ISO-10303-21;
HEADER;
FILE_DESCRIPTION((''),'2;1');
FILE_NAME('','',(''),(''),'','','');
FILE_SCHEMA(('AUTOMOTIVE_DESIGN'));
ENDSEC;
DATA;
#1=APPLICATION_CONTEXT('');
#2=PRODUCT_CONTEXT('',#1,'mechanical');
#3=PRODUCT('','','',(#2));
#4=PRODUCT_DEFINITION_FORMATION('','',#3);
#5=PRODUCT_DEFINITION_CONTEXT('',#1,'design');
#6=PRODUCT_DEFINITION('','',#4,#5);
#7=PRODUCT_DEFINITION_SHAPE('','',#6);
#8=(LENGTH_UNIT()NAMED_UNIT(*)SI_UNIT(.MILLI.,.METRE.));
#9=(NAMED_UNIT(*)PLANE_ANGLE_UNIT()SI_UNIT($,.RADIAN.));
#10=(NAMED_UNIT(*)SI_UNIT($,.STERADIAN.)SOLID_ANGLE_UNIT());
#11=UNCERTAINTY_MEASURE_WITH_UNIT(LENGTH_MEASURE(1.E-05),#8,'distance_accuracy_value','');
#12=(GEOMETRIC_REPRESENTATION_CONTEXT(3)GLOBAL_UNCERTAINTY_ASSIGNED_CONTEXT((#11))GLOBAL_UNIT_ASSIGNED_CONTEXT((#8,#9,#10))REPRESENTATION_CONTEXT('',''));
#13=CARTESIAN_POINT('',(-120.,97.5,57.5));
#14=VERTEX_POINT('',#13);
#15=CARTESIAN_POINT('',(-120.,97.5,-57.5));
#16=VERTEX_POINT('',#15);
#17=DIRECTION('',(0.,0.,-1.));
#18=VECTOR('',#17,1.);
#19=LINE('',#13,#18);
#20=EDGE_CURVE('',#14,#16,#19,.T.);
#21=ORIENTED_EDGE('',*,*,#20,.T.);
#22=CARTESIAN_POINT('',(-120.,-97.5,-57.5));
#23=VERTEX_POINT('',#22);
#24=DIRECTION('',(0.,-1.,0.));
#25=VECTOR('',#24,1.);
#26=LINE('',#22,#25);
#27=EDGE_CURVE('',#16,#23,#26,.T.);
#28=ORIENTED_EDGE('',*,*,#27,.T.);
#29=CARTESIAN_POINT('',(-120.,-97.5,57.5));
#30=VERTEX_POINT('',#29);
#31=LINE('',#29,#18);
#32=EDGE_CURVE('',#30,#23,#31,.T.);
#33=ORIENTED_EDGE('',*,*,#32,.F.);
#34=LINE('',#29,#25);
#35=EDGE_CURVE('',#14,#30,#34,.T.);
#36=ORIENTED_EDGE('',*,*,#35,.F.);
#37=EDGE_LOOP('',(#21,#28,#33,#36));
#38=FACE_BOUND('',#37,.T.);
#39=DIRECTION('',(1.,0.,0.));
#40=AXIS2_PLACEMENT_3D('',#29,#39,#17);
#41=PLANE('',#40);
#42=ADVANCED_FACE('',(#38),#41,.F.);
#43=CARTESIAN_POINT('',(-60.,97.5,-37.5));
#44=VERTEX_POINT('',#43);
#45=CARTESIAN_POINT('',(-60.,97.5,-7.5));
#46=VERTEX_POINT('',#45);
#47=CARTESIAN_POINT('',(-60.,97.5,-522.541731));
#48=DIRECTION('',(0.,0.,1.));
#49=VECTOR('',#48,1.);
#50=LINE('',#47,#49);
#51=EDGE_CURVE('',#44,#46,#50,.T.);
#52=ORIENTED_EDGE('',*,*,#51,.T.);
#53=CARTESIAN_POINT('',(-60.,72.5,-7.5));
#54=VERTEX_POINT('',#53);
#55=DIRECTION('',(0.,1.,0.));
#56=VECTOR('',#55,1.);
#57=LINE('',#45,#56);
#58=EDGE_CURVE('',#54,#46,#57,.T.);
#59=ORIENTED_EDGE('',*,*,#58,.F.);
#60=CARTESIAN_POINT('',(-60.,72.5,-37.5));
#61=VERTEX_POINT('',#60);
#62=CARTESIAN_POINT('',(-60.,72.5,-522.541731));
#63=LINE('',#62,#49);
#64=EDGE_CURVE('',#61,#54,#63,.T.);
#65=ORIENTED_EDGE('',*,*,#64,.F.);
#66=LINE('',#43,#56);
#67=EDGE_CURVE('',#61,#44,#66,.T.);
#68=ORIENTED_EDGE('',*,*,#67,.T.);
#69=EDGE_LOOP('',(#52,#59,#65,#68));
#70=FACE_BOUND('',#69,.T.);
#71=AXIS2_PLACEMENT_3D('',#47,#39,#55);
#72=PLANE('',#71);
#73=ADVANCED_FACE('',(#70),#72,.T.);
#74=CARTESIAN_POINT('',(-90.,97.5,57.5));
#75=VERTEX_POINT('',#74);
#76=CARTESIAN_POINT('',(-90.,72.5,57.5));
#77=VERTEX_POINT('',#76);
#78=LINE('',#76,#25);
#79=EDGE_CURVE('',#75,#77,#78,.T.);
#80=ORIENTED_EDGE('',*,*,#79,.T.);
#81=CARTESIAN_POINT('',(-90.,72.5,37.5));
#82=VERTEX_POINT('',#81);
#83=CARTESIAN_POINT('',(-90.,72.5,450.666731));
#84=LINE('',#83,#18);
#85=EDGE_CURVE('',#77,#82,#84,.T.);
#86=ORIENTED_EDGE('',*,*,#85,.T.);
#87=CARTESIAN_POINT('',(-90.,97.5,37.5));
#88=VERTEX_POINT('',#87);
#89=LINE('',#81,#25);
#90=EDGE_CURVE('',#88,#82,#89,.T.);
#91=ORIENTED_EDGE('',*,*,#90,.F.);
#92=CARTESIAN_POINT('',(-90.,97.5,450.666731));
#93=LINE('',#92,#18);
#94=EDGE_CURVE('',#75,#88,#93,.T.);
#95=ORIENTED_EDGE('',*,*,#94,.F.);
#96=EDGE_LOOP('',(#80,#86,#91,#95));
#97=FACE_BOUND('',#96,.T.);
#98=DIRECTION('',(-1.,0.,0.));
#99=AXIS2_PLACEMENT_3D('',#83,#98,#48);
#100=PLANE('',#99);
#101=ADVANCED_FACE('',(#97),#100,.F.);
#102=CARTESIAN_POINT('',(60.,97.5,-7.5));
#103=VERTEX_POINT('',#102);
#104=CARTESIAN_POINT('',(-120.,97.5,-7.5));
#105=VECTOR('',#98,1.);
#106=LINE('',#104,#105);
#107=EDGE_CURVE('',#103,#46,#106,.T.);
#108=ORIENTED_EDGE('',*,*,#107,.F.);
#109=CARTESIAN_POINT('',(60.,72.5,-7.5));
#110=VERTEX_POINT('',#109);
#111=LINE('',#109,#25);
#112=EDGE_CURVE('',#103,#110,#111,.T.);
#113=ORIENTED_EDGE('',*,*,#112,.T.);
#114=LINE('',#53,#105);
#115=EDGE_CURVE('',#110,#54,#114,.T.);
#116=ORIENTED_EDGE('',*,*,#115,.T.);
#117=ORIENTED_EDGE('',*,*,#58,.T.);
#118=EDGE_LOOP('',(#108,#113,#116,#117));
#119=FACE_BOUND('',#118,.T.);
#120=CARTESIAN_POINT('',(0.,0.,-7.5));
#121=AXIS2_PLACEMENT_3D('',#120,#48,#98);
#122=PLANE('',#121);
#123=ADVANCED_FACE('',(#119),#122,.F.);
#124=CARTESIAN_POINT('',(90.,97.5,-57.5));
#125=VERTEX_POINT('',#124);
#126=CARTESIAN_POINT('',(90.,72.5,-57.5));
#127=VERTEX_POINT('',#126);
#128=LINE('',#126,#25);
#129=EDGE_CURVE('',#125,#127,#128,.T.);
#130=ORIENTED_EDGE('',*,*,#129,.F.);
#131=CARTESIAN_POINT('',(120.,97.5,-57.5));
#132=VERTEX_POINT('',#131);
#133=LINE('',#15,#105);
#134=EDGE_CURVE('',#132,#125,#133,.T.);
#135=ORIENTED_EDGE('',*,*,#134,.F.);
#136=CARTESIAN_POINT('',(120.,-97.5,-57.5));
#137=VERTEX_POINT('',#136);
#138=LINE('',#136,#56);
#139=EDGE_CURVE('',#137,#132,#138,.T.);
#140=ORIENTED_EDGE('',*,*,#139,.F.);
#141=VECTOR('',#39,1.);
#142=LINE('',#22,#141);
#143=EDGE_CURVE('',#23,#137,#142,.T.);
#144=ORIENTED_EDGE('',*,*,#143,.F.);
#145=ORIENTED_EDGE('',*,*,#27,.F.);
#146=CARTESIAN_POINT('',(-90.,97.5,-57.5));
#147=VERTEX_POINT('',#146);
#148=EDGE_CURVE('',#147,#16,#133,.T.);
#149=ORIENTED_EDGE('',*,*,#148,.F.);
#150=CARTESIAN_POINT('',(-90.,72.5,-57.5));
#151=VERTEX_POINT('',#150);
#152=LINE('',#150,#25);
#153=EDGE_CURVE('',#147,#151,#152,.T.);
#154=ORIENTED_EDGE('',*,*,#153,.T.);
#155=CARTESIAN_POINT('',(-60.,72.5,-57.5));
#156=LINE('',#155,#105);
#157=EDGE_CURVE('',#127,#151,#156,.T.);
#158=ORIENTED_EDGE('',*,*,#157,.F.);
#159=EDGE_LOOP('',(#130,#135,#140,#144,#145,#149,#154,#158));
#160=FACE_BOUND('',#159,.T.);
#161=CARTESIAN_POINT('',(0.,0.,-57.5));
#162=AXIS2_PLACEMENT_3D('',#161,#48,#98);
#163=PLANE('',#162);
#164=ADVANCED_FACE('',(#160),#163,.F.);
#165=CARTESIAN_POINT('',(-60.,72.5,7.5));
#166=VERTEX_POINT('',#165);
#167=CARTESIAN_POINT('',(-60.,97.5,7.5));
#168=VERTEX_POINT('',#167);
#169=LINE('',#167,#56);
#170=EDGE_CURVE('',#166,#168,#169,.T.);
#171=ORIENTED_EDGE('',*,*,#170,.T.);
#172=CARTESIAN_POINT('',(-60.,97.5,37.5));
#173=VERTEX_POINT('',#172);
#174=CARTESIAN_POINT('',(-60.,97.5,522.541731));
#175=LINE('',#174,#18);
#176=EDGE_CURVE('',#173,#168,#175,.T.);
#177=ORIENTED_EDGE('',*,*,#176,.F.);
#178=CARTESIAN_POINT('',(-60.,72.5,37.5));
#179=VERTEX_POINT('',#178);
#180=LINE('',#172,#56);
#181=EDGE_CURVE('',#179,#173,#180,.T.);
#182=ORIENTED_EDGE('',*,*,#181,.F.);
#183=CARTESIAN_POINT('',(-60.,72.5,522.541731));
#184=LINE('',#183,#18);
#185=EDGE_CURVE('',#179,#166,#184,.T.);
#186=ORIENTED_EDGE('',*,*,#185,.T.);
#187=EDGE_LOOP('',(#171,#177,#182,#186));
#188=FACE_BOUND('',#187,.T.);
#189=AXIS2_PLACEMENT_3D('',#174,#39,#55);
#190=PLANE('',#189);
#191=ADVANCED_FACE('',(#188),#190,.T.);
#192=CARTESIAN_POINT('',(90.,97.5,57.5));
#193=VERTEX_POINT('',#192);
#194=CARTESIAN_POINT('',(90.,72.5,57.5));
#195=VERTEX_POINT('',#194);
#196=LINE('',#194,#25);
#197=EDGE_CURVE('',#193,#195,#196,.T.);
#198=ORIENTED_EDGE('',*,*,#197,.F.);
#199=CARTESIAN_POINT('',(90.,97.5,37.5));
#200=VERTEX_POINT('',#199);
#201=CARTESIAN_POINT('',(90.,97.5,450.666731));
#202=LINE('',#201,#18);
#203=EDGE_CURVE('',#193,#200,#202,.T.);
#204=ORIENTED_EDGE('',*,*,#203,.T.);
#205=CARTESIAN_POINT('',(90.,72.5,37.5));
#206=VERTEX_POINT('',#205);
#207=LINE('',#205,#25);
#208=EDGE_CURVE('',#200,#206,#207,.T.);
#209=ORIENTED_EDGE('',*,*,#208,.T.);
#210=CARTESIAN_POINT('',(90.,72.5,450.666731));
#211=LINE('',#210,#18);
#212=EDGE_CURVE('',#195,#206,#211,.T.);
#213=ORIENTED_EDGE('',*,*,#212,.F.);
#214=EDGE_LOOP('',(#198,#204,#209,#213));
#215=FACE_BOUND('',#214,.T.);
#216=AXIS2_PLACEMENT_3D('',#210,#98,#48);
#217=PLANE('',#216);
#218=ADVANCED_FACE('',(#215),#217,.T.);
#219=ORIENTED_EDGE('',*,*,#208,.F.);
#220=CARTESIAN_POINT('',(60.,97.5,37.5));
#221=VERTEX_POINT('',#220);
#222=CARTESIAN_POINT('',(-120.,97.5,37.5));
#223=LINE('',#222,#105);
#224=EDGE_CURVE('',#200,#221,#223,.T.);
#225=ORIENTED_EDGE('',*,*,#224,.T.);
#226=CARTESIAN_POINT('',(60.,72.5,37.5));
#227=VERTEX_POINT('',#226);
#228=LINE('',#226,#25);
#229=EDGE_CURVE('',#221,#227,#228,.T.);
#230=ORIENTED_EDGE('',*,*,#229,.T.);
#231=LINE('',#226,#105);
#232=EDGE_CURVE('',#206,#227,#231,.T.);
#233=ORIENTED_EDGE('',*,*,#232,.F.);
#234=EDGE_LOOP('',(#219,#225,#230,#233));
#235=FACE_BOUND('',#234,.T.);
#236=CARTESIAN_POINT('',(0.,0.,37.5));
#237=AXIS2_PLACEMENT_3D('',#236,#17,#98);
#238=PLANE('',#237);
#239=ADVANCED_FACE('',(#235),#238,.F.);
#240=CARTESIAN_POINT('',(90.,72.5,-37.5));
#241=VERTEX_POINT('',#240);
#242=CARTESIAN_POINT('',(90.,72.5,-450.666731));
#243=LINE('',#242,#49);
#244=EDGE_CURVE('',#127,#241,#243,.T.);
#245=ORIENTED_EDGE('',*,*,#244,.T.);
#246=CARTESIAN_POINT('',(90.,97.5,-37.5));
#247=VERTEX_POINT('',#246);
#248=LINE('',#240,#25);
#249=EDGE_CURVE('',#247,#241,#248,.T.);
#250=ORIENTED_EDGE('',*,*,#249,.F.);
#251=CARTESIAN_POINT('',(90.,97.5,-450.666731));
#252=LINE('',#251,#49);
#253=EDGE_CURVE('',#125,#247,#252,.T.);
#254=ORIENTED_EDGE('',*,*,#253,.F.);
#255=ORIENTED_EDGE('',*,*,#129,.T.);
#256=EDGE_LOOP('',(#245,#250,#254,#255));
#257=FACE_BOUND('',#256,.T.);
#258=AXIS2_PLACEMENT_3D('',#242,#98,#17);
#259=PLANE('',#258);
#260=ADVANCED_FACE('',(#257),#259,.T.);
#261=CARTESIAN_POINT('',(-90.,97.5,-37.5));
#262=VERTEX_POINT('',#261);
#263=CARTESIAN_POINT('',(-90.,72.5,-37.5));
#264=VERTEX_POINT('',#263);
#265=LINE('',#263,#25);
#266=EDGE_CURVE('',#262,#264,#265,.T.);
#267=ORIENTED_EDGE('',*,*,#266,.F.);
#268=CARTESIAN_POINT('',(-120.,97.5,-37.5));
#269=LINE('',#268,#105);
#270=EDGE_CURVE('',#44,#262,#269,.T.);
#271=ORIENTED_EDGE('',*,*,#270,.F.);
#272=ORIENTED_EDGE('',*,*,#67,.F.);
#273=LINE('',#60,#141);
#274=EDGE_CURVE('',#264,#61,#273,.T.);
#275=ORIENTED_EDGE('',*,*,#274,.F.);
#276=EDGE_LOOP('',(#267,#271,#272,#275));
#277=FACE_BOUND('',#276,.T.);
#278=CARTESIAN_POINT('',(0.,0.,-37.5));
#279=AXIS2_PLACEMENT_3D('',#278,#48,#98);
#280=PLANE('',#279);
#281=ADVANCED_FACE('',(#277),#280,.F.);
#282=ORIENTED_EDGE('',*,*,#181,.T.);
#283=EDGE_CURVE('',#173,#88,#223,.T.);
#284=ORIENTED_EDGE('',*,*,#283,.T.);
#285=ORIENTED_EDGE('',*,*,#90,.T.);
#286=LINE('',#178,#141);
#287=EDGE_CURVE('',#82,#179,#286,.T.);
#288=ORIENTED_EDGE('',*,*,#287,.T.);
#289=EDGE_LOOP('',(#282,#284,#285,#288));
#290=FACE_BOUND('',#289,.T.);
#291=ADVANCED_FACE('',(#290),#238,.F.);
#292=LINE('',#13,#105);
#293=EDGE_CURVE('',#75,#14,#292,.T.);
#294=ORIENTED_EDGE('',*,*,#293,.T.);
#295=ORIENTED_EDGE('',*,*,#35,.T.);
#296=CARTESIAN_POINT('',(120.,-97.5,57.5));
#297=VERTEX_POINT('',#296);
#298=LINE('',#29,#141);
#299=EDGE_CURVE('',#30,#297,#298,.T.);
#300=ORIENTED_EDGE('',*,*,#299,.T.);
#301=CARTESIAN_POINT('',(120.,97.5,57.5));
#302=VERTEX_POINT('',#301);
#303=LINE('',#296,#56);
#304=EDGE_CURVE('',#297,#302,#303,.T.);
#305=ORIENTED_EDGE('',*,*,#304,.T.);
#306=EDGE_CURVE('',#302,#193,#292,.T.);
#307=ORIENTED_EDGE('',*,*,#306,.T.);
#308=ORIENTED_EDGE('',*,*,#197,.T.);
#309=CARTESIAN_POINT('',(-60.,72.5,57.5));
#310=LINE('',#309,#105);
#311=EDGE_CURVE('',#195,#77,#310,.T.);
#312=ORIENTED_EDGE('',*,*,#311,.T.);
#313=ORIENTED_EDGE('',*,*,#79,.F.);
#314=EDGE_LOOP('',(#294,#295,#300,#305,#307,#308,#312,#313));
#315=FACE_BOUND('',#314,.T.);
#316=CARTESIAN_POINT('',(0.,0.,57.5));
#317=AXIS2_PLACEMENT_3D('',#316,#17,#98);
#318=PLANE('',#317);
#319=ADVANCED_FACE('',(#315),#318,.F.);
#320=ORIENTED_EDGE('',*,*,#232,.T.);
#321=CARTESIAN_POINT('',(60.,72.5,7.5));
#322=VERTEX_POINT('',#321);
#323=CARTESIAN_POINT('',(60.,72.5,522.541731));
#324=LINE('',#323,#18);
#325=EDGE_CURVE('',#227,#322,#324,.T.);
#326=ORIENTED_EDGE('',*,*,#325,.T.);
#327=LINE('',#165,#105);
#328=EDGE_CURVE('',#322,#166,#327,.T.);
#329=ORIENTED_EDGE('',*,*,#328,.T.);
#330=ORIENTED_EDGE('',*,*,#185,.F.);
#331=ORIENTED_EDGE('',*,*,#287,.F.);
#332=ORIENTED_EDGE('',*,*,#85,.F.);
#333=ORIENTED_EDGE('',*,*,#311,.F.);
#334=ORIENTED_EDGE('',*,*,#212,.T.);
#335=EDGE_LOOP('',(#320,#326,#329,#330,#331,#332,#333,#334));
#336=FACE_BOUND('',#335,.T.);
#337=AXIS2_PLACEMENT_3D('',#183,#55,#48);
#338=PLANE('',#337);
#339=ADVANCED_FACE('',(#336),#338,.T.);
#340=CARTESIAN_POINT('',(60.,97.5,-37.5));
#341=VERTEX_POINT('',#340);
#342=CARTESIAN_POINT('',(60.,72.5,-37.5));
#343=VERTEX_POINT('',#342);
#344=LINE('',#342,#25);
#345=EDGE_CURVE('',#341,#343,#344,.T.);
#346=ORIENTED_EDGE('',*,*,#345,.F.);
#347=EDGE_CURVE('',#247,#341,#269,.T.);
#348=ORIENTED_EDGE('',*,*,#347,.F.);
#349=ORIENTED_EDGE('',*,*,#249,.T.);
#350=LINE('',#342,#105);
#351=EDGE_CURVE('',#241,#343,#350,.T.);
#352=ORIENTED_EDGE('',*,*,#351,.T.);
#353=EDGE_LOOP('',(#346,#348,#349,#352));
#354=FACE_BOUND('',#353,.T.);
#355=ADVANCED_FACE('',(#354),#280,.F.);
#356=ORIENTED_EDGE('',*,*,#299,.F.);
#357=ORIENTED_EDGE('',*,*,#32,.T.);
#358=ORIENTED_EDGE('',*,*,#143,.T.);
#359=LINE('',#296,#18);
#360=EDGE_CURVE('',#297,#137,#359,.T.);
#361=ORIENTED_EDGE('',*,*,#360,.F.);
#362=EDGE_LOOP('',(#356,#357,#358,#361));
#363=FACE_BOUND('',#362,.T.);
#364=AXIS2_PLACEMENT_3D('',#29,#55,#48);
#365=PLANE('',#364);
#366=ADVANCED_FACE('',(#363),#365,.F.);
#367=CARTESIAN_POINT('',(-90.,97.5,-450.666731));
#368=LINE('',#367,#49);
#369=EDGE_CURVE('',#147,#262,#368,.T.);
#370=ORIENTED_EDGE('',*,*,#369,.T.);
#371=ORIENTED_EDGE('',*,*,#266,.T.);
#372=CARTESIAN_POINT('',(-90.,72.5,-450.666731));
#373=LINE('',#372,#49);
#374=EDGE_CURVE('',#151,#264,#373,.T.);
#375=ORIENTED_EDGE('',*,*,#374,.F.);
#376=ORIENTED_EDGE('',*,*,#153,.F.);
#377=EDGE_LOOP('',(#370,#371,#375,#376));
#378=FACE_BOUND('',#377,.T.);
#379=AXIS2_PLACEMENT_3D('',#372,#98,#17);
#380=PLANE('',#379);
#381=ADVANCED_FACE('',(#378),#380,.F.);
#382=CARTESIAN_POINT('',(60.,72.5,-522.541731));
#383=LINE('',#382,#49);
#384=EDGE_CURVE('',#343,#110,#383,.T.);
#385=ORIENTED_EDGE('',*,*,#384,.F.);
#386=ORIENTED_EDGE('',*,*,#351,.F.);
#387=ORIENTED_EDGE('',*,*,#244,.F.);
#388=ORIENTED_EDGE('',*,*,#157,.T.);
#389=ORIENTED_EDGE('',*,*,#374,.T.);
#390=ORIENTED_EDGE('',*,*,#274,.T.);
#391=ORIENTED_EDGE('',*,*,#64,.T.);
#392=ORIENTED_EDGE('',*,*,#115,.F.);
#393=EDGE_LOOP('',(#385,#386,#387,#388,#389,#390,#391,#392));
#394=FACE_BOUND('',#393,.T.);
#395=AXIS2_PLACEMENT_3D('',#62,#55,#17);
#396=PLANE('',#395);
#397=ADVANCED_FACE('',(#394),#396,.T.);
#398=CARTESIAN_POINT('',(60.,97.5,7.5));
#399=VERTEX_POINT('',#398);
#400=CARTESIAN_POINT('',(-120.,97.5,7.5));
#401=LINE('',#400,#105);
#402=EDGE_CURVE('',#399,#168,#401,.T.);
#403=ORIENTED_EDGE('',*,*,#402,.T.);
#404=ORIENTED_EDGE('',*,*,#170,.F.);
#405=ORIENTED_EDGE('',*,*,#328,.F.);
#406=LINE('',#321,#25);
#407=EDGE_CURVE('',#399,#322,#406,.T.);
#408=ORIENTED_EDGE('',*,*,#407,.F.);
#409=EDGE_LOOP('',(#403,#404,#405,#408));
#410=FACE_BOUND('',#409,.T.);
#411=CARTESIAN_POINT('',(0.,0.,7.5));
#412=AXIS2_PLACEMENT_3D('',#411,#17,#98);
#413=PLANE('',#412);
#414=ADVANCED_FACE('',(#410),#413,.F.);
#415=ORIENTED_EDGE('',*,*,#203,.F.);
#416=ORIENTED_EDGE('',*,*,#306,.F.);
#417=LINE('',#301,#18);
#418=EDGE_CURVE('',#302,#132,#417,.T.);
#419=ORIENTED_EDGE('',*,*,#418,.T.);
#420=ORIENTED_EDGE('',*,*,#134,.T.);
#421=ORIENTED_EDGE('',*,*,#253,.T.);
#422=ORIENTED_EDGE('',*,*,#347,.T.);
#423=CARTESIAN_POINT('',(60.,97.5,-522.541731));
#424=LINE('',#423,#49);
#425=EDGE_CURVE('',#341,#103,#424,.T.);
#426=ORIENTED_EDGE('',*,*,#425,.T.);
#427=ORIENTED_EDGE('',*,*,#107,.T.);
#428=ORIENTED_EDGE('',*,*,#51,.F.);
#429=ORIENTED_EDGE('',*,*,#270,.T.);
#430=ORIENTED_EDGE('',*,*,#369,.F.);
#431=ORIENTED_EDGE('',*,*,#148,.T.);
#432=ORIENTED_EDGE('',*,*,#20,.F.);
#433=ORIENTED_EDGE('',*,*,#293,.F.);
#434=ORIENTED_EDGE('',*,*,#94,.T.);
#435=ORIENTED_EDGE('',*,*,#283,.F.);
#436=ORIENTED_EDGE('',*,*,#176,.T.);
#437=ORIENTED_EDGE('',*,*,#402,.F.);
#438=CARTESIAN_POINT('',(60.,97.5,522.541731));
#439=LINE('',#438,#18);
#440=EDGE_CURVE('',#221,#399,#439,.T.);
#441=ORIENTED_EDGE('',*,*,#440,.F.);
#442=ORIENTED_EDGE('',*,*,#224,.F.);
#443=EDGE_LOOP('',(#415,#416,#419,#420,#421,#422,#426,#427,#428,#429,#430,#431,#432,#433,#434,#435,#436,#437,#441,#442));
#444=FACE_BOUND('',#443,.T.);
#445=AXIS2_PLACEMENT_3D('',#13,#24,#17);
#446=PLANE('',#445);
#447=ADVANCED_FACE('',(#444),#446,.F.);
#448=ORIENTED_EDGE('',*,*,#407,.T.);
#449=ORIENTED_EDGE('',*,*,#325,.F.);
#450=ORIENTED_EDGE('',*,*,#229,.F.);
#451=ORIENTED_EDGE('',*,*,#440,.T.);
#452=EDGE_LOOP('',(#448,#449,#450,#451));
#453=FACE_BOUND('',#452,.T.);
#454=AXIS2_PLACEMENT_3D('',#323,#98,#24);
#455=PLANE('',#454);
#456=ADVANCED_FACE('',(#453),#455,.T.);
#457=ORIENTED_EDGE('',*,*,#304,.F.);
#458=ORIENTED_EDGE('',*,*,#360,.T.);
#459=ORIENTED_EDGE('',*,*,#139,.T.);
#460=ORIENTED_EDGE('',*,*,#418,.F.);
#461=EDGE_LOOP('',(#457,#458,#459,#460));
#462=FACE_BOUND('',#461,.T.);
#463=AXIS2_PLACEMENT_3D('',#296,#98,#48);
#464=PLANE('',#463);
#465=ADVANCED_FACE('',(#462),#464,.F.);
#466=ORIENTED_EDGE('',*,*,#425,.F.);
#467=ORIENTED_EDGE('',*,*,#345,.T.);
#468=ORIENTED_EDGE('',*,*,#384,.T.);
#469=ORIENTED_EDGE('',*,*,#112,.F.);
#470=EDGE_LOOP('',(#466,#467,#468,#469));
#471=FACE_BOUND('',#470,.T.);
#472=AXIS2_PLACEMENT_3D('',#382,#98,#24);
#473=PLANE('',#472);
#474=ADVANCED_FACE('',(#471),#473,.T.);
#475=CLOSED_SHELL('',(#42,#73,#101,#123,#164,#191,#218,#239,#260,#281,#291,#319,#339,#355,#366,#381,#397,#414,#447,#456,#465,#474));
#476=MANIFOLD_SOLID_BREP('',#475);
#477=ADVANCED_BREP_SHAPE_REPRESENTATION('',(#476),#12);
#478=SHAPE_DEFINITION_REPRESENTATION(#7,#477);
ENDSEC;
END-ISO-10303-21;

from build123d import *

# Parameters (mm, degrees)
SKETCH_1_W               = 240
SKETCH_1_H               = 195
EXTRUDE_1_DEPTH          = 57.5
CUT_EXTRUDE_1_DEPTH      = 165.962116863
CUT_EXTRUDE_1_DEPTH_BACK = 50
CUT_EXTRUDE_START        = -20
CUT_EXTRUDE_2_OUTLINE_W  = 30
CUT_EXTRUDE_2_OUTLINE_H  = 25
CUT_EXTRUDE_2_DEPTH      = 20


# Read off the part's stored shape, not the designer's step: 切除-拉伸2
with BuildPart() as part:
    # 草图1 → 凸台-拉伸1 (new body)
    with BuildSketch(Plane.XY):
        Rectangle(SKETCH_1_W, SKETCH_1_H)
    extrude(amount=EXTRUDE_1_DEPTH)

    # 草图2 → 切除-拉伸1 (cut, two sides: drawn at the far end of the back side and taken through both)
    with BuildSketch(Plane.XY.offset(57.5).offset(-CUT_EXTRUDE_1_DEPTH_BACK)):
        Polygon((-60, 638.254180389), (-60, 97.5), (-60, 72.5), (60, 72.5), (60, 97.5), (60, 638.254180389), (60, 1719.762541166), (-60, 1719.762541166), align=None)
    extrude(amount=CUT_EXTRUDE_1_DEPTH + CUT_EXTRUDE_1_DEPTH_BACK, mode=Mode.SUBTRACT)

    # 切除-拉伸2 outline → 切除-拉伸2 (cut)
    with BuildSketch(Plane.XY.offset(57.5).offset(CUT_EXTRUDE_START)):
        with Locations((-75, 85)):
            Rectangle(CUT_EXTRUDE_2_OUTLINE_W, CUT_EXTRUDE_2_OUTLINE_H)
    cut_extrude_2 = extrude(amount=CUT_EXTRUDE_2_DEPTH, mode=Mode.SUBTRACT)

    # 镜向1: 切除-拉伸2 across plane
    add(cut_extrude_2.mirror(Plane(origin=(0, 0, 0), x_dir=(0, 0, 1), z_dir=(1, 0, 0))), mode=Mode.SUBTRACT)

    # 镜向2: part across plane


with BuildPart() as part_1:
    add(part.part)
    add(part.part.mirror(Plane(origin=(0, 0, 0), x_dir=(1, 0, 0), z_dir=(0, 0, -1))))


solid = part_1.part
